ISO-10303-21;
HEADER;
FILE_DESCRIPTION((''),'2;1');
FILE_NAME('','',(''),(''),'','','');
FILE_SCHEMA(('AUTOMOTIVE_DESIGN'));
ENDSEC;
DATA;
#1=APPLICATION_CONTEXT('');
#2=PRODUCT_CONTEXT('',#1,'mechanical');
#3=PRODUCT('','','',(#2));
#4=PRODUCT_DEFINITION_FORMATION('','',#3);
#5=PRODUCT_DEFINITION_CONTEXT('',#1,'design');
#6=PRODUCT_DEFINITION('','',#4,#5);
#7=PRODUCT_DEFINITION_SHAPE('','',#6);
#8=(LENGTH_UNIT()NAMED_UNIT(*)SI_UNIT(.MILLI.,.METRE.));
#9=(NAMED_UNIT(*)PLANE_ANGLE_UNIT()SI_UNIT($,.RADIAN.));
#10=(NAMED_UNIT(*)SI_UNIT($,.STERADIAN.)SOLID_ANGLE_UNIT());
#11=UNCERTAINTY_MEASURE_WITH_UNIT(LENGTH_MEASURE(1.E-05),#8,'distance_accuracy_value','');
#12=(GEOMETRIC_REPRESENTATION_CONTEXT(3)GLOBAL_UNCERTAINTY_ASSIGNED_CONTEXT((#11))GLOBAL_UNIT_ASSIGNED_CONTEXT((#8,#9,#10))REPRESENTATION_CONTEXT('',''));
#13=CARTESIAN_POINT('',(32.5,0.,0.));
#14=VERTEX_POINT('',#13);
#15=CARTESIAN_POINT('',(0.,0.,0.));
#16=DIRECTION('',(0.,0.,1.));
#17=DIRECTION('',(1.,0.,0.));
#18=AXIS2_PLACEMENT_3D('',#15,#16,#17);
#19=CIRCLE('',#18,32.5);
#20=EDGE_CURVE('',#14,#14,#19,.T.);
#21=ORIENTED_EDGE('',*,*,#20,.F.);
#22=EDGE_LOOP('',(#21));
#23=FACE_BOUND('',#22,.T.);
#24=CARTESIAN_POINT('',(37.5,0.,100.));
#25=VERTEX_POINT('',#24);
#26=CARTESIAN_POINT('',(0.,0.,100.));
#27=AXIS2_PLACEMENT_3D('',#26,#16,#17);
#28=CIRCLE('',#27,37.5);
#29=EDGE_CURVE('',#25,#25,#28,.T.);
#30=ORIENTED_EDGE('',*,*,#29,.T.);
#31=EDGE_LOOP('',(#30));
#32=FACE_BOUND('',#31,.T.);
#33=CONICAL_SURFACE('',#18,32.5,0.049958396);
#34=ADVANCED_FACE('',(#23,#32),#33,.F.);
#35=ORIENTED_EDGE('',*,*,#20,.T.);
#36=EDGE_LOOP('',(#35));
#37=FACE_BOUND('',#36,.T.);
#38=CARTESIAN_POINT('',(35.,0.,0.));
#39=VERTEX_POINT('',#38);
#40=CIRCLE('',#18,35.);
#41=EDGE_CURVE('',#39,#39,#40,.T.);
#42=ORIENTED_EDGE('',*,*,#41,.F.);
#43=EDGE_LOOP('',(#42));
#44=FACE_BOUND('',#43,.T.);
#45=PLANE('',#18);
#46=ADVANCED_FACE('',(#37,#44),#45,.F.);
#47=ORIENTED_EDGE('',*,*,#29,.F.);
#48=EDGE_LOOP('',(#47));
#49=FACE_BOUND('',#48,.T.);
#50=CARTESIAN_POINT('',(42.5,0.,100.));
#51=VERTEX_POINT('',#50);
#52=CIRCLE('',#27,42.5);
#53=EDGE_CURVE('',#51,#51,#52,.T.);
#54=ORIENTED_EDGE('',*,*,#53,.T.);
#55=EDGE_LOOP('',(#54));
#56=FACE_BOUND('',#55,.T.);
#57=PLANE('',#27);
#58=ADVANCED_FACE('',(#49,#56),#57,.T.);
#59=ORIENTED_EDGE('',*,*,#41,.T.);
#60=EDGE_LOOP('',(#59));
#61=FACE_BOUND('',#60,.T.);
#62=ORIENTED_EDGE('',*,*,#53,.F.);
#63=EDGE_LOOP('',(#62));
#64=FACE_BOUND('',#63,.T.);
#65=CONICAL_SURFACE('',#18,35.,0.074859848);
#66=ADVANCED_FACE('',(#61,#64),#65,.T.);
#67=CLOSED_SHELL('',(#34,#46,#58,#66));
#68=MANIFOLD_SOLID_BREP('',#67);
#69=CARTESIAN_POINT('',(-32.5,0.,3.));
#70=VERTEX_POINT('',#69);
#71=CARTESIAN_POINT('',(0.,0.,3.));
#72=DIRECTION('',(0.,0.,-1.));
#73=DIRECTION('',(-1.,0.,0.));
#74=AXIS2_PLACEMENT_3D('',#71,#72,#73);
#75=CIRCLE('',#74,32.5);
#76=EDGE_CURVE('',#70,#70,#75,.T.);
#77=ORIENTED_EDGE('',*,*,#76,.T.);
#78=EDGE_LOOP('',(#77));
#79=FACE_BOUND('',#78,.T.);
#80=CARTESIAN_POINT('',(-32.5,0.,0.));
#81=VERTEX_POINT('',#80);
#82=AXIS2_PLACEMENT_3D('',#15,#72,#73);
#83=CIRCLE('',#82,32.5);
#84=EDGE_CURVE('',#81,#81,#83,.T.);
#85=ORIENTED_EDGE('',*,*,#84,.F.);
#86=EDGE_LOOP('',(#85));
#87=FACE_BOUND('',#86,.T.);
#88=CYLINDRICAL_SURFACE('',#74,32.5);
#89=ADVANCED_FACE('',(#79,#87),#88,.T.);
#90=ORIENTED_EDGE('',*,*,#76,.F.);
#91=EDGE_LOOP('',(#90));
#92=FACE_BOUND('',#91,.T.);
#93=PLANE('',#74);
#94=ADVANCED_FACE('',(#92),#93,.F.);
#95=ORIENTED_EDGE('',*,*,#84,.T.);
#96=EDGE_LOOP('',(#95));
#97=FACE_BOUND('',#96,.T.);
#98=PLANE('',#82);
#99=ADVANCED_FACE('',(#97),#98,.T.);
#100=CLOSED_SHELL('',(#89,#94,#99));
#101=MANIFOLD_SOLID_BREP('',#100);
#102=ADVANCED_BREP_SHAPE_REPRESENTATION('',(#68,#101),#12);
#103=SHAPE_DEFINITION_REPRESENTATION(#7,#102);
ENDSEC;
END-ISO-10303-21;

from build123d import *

# Parameters (mm, degrees)
SKETCH7_R           = 42.5
SKETCH6_R           = 35
SKETCH9_R           = 32.5
BOSS_EXTRUDE3_DEPTH = 3


# Read off the part's stored shape, not the designer's step: Cut-Loft2
with BuildPart() as part:
    # Sketch7 → Loft1 section 0
    with BuildSketch(Plane.XY.offset(100)):
        Circle(SKETCH7_R)
    # Sketch6 → Loft1 section 1
    with BuildSketch(Plane.XY):
        Circle(SKETCH6_R)
    loft()

    # Cut-Loft2 outline → Cut-Loft2 (revolve, cut)
    with BuildSketch(Plane.XZ):
        Polygon((0, 100), (0, 0), (32.5, 0), (37.5, 100), align=None)
    revolve(axis=Axis((0, 0, 0), (0, 0, 1)), mode=Mode.SUBTRACT)


with BuildPart() as body_2:
    # Sketch9 → Boss-Extrude3 (new body)
    with BuildSketch(Plane(origin=(0, 0, 0), x_dir=(-1, 0, 0), z_dir=(0, 0, -1))):
        Circle(SKETCH9_R)
    extrude(amount=-BOSS_EXTRUDE3_DEPTH)


solid = Compound([part.part, body_2.part])
